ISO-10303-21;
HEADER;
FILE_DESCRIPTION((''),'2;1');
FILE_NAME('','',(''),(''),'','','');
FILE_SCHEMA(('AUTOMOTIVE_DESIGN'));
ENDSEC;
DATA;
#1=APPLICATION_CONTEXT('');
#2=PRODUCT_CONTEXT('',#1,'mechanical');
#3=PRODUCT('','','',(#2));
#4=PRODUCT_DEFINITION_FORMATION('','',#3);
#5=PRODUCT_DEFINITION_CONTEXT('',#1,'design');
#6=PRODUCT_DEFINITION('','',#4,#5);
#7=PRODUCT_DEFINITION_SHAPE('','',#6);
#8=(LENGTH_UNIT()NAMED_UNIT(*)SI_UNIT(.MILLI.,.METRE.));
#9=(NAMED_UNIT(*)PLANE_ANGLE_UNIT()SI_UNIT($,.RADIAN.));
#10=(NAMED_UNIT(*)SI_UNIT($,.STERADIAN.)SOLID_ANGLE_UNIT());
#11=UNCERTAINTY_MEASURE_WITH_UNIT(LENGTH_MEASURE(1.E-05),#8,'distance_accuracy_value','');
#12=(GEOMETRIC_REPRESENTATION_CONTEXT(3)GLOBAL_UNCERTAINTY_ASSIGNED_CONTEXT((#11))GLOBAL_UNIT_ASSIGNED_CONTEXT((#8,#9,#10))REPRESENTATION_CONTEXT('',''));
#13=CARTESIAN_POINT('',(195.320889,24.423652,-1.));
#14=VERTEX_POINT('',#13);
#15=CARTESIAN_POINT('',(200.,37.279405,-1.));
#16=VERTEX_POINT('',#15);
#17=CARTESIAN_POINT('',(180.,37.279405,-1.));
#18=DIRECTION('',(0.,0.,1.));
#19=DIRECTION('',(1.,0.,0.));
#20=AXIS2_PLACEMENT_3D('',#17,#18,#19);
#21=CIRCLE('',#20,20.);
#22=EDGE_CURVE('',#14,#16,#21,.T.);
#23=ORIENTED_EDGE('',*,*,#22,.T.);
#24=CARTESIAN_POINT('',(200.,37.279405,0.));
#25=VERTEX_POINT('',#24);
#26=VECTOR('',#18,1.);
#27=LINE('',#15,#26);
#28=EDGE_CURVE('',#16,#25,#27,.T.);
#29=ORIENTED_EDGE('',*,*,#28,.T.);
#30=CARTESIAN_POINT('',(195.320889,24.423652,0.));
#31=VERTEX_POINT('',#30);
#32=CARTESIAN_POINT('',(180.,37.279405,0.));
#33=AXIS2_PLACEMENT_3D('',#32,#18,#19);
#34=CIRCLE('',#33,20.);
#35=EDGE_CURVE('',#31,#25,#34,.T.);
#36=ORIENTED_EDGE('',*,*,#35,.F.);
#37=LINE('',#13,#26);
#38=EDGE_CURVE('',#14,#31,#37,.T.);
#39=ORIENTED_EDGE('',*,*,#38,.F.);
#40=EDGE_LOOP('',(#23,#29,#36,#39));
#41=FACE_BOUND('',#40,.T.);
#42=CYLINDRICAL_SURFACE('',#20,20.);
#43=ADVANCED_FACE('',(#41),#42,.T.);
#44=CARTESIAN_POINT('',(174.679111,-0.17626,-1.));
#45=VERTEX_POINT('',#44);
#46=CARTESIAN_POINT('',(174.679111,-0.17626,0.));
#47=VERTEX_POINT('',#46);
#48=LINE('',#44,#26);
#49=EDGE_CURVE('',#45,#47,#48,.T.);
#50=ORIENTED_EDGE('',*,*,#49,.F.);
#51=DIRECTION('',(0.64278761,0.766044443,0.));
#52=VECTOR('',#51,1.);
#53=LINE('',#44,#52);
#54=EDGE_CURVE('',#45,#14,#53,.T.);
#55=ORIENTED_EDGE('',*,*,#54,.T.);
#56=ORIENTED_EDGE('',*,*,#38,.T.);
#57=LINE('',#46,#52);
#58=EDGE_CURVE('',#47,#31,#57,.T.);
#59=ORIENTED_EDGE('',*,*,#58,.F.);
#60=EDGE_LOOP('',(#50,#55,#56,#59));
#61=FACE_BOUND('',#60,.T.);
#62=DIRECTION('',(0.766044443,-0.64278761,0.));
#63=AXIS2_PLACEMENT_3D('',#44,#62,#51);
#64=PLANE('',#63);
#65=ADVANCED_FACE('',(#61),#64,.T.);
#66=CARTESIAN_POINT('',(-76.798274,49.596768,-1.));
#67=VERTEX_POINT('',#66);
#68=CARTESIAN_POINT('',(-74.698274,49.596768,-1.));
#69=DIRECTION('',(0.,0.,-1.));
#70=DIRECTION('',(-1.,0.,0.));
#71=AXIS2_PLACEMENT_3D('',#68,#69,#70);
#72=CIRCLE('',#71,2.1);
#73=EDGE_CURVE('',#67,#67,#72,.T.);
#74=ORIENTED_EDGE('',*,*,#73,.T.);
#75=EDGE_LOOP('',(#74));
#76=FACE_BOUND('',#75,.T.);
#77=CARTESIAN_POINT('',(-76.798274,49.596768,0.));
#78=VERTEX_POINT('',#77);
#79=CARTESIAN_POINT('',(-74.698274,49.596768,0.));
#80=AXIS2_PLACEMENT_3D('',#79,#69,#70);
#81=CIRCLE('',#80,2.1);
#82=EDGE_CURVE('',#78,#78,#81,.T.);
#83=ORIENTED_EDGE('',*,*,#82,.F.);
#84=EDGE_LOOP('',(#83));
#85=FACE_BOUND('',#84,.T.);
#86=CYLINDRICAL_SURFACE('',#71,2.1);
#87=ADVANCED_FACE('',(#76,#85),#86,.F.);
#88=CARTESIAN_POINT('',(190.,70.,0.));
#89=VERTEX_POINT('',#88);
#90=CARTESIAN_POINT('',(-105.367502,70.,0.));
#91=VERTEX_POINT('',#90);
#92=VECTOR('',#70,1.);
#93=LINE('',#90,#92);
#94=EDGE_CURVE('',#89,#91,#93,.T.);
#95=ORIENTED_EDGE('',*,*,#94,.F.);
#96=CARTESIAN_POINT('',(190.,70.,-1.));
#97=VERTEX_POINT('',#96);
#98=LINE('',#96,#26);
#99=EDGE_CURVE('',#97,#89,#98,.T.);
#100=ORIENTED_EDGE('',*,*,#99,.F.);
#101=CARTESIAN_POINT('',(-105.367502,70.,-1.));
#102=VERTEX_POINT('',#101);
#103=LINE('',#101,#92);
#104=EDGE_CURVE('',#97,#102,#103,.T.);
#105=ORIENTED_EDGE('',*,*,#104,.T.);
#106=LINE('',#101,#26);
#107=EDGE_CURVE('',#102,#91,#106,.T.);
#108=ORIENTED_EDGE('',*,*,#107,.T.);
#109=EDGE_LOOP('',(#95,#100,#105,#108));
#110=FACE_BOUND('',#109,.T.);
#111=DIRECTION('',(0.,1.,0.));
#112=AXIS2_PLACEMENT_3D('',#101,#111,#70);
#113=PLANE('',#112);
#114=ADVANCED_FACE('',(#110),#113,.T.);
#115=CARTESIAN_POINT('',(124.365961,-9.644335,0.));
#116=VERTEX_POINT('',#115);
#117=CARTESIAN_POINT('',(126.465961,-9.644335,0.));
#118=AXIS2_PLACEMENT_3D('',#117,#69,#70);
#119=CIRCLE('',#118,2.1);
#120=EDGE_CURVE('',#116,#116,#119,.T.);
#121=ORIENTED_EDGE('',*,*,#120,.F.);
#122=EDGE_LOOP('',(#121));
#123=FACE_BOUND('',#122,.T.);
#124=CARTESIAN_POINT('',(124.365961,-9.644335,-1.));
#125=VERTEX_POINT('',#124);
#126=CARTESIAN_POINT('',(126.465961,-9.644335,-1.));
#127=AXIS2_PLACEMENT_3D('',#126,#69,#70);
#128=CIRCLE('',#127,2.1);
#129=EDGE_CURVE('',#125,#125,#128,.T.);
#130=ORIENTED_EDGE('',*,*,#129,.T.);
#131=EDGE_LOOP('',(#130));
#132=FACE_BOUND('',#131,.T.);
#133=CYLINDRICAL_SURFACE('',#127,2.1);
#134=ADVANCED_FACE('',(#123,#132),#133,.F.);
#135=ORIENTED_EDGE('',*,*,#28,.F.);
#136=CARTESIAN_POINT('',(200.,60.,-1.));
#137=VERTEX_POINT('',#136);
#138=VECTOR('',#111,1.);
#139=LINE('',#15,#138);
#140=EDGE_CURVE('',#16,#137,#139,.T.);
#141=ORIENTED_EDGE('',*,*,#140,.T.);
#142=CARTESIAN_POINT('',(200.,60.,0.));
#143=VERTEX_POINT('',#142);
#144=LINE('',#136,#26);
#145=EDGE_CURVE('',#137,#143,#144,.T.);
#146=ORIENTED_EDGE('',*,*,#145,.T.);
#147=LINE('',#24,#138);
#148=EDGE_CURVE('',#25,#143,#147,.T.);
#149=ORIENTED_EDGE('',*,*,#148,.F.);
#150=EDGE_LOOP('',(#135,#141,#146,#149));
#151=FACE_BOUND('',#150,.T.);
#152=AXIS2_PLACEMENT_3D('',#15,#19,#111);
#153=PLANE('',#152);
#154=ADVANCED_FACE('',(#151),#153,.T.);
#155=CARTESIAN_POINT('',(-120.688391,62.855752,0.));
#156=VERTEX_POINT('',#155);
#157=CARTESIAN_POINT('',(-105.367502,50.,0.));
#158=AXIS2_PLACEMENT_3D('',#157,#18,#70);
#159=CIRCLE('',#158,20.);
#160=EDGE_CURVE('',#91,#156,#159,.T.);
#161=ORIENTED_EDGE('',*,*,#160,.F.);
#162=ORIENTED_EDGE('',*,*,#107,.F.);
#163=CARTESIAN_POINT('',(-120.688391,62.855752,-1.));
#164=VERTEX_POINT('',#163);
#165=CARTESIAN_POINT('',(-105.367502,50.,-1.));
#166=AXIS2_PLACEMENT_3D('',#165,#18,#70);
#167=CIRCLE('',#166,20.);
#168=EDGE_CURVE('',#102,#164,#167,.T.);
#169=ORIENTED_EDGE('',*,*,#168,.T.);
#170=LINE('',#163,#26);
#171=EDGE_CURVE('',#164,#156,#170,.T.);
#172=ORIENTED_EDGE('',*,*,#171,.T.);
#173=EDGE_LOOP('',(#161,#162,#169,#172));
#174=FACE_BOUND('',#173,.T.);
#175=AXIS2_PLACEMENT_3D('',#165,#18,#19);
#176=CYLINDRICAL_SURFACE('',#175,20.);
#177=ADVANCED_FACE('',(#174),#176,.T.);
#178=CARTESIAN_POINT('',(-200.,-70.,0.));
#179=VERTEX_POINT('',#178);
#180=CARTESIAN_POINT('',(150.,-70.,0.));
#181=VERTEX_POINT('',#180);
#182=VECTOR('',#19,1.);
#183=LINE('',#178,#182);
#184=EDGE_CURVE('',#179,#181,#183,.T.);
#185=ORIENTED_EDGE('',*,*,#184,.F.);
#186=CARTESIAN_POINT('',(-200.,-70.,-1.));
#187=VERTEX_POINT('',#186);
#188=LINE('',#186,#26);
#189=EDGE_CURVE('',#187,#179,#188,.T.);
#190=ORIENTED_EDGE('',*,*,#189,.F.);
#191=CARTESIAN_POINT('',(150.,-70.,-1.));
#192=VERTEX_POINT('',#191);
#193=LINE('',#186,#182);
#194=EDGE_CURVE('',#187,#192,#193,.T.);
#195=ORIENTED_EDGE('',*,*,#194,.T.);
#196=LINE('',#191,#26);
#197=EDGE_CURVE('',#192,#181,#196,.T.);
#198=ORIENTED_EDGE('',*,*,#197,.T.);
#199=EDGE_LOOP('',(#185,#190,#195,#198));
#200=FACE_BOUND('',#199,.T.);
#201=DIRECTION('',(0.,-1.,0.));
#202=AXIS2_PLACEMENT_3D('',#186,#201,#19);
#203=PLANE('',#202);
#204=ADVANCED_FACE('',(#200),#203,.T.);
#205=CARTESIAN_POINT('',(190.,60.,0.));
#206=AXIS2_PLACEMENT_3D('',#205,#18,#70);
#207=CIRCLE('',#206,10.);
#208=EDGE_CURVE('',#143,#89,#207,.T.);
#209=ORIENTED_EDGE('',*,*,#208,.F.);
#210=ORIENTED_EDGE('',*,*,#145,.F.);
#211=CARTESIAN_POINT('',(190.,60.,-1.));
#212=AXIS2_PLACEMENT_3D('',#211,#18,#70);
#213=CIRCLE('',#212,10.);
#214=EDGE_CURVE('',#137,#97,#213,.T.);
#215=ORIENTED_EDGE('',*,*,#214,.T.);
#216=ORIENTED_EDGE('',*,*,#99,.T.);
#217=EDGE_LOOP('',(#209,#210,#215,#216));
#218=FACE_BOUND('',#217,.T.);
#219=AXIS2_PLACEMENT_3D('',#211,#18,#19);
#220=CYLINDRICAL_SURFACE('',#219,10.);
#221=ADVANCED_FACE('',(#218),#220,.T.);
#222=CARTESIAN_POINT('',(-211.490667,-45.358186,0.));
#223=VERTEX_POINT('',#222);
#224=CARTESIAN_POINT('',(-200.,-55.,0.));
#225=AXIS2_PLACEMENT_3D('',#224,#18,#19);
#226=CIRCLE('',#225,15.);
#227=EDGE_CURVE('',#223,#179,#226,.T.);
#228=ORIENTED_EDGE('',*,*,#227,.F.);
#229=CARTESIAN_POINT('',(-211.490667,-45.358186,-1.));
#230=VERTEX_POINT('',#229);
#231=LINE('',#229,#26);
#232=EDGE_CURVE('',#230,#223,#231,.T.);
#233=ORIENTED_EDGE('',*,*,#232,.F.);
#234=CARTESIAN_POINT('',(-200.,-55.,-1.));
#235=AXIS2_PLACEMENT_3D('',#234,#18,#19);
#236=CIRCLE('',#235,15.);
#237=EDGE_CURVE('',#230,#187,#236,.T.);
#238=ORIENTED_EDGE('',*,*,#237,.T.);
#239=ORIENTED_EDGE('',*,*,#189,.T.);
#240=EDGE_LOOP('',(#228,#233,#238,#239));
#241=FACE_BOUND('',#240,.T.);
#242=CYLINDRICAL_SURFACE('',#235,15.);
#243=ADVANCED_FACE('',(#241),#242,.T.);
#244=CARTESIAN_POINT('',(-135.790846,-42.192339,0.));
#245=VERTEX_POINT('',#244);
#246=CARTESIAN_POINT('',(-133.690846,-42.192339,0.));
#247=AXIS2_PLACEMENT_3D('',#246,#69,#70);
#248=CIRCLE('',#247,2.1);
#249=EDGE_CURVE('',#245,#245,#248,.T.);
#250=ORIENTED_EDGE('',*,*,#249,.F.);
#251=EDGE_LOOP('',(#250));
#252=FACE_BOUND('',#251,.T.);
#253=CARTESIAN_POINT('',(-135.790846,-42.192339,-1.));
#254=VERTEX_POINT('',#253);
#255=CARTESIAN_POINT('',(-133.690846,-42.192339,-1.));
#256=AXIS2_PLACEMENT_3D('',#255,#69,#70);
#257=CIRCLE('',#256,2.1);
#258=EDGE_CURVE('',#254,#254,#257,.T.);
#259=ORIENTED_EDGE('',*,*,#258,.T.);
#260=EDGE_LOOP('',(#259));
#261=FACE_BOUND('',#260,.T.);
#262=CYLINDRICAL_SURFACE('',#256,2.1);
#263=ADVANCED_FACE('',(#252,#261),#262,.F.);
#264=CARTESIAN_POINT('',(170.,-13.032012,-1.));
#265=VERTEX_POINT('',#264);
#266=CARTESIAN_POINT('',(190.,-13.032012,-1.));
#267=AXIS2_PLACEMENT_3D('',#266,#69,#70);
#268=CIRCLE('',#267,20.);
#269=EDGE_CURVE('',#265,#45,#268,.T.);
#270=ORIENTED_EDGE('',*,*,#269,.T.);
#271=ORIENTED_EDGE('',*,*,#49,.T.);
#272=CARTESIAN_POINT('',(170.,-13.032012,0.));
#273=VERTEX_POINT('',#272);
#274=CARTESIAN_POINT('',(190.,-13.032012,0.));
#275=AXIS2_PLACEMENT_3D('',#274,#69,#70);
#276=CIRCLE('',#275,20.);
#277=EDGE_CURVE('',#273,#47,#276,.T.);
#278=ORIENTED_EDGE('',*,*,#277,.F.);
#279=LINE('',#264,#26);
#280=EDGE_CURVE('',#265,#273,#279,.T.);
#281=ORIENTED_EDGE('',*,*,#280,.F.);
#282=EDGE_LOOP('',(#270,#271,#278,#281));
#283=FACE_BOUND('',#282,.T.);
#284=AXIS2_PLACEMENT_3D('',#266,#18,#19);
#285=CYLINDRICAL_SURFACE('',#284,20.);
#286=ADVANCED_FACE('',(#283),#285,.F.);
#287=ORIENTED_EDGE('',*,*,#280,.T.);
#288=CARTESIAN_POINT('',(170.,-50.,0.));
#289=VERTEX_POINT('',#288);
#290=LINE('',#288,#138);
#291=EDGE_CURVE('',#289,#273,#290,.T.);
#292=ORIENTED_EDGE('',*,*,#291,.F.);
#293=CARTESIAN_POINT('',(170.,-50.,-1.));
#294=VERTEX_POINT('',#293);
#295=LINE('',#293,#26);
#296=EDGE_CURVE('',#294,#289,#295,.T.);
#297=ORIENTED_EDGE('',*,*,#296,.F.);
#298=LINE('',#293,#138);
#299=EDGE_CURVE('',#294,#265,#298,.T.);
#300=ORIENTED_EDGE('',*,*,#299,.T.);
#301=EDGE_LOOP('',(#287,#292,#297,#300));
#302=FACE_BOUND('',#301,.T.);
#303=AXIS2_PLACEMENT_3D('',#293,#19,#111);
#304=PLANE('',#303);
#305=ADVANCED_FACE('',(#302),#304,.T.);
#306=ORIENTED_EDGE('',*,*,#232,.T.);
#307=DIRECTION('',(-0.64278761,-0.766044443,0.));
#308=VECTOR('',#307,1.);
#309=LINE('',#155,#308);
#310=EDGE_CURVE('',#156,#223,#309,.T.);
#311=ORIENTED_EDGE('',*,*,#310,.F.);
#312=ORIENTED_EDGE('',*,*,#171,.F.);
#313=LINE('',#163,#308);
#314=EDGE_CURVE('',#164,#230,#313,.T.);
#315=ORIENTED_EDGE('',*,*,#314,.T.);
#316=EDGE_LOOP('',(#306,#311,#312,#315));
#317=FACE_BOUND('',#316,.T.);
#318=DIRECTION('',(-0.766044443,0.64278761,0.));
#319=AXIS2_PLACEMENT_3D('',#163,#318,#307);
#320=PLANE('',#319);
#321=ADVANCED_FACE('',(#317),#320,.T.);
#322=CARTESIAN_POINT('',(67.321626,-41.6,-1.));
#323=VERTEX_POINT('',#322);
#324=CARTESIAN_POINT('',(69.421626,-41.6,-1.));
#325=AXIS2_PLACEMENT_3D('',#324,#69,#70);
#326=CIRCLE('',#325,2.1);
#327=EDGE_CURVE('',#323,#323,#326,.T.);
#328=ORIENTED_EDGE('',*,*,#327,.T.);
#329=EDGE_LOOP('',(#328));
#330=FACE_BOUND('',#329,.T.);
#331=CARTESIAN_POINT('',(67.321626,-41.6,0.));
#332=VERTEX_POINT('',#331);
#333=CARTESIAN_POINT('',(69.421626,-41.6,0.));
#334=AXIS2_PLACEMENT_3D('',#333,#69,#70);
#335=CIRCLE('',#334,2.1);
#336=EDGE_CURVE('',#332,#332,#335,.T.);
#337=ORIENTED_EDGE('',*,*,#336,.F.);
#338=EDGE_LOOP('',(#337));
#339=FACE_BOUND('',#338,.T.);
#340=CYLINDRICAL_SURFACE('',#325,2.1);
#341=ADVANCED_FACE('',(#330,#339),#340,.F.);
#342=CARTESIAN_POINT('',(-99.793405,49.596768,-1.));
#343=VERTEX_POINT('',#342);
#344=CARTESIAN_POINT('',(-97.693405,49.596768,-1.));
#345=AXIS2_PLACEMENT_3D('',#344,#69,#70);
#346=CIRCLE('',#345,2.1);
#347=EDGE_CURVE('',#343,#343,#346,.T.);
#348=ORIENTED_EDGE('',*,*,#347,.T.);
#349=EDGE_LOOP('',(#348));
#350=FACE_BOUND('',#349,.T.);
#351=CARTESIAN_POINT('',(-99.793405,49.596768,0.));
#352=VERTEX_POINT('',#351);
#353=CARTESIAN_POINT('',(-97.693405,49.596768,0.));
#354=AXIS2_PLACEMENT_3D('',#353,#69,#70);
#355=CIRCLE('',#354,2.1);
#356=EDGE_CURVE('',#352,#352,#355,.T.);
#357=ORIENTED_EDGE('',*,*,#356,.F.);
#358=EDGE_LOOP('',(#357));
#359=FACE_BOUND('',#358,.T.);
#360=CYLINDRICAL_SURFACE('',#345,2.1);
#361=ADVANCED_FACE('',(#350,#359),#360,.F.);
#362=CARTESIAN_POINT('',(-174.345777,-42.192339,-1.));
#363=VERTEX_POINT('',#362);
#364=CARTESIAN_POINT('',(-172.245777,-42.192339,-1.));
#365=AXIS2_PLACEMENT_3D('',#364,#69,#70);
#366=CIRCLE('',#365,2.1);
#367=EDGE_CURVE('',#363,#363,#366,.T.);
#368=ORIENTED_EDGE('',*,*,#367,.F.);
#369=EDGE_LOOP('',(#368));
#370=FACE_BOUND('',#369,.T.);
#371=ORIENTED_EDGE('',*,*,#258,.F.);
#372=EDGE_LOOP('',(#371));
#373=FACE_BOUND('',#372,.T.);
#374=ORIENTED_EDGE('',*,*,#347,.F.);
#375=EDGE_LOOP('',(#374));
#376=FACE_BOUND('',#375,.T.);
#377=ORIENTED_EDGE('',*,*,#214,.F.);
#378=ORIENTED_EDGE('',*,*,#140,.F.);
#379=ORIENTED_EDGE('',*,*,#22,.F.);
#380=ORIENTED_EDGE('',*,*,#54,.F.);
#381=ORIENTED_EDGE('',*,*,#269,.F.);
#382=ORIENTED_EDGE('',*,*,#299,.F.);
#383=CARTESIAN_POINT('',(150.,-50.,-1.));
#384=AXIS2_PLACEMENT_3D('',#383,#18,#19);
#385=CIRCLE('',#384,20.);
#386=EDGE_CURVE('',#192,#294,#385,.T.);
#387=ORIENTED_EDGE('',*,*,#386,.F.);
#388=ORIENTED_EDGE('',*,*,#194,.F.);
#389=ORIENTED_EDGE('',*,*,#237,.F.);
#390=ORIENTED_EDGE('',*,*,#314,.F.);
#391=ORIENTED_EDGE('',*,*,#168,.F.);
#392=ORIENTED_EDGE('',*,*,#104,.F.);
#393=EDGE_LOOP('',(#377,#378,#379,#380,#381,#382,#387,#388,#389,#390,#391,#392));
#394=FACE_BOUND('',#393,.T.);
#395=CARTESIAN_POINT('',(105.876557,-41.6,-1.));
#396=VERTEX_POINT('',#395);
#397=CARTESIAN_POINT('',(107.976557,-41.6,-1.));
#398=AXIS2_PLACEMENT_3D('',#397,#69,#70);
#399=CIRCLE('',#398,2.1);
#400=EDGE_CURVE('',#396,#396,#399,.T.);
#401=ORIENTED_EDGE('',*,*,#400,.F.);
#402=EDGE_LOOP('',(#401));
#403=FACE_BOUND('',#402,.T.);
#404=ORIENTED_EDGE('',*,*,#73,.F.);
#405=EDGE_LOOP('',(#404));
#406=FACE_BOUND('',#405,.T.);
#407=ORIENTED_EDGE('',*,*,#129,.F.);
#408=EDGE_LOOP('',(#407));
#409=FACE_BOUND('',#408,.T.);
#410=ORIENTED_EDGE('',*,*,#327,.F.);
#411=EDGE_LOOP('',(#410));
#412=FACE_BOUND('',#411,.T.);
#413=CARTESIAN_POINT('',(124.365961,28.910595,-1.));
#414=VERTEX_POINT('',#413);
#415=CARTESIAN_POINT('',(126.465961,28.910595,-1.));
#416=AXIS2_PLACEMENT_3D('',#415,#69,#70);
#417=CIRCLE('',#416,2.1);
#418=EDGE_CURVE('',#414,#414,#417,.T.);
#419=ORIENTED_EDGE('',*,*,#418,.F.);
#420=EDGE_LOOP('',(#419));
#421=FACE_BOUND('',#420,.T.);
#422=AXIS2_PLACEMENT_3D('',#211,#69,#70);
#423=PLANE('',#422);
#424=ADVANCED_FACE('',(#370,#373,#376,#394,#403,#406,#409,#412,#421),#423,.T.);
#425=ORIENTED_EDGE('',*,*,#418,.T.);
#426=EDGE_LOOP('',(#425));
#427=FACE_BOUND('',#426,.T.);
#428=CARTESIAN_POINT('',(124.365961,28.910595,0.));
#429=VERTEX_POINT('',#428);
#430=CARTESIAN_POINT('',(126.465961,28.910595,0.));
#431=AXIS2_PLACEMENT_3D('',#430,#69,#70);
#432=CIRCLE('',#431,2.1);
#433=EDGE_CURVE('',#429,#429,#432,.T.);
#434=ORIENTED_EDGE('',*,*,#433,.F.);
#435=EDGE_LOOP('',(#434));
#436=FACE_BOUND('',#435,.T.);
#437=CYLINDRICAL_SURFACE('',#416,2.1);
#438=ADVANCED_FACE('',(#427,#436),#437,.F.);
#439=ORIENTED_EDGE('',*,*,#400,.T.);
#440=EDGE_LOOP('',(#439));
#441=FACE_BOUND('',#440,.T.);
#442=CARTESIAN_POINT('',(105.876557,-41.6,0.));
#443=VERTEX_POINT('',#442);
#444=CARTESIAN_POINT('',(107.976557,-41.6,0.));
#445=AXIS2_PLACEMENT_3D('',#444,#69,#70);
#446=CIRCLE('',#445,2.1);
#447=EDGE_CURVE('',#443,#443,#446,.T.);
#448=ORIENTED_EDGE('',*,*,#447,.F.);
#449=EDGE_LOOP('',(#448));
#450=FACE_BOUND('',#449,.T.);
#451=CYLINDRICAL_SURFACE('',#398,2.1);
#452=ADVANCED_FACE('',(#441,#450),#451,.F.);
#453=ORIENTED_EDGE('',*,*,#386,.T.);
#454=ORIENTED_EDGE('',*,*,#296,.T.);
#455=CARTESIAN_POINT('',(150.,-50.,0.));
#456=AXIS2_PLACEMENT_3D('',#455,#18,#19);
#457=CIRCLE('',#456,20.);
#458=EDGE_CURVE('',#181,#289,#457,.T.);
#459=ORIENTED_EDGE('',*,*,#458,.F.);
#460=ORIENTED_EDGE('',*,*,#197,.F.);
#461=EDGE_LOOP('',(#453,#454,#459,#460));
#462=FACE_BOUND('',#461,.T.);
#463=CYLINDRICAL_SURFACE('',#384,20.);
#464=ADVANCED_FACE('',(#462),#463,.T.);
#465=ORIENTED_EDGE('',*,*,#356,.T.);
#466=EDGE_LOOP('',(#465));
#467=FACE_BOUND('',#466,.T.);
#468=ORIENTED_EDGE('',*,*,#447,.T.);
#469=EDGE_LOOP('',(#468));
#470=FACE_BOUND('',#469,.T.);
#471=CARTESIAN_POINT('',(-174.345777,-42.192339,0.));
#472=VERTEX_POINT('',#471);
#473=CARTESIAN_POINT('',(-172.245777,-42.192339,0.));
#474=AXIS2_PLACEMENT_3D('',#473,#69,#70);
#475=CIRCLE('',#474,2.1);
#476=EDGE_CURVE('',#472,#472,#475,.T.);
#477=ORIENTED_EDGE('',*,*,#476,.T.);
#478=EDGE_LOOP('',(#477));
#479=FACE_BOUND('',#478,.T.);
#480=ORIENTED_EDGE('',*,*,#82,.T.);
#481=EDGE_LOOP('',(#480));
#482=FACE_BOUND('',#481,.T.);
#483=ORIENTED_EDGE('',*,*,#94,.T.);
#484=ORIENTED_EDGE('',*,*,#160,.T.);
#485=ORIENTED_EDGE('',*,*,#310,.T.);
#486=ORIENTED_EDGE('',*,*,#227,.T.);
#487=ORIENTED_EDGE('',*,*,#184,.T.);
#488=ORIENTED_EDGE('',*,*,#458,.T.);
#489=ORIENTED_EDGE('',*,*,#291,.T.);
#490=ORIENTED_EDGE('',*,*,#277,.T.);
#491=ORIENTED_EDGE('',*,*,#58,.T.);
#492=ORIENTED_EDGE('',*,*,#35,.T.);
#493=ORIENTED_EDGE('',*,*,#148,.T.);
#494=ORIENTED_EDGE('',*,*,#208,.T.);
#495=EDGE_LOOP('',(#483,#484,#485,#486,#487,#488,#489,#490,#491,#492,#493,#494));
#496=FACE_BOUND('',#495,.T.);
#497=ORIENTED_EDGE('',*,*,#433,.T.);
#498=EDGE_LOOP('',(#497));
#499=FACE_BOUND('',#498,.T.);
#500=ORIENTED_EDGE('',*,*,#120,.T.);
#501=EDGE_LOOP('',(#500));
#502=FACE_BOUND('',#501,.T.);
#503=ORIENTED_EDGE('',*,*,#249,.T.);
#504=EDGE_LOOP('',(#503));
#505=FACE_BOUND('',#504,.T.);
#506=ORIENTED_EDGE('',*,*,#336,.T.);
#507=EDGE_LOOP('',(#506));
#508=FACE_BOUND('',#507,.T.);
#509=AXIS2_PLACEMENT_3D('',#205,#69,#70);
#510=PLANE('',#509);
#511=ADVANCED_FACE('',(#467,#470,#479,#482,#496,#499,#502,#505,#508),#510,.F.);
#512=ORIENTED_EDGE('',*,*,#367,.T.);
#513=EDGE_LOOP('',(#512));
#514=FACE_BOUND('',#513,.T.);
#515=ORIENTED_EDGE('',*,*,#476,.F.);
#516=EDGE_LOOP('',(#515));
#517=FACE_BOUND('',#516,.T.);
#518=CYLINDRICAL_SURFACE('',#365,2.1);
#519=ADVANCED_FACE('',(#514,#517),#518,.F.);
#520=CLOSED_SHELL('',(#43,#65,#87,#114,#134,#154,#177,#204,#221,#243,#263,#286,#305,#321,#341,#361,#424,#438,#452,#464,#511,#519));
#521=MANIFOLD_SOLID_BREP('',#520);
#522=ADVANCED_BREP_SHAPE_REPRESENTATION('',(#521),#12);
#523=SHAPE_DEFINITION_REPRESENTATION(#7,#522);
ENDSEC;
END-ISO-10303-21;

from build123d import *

# Parameters (mm, degrees)
BASE_FLANGE1_DEPTH                 = 1
F_4_2_START                        = -1
F_4_2_4_2_DIAMETER_HOLE1_OUTLINE_R = 2.1
F_4_2_4_2_DIAMETER_HOLE1_DEPTH     = 1


# Read off the part's stored shape, not the designer's step: Ø4.2 (4.2) Diameter Hole1
# Sheet-metal steps are written as plain solids
with BuildPart() as part:
    # Sketch1 → Base-Flange1 (new body)
    with BuildSketch(Plane.XY):
        with BuildLine():
            Line((-120.688391142, 62.855752194), (-211.490666647, -45.358185855))
            ThreePointArc((-211.490666647, -45.358185855), (-213.594616806, -61.339273926), (-200, -70))
            Line((-200, -70), (150, -70))
            ThreePointArc((150, -70), (164.142135624, -64.142135624), (170, -50))
            Line((170, -50), (170, -13.032012463))
            ThreePointArc((170, -13.032012463), (171.206147584, -6.191609597), (174.679111138, -0.176260269))
            Line((174.679111138, -0.176260269), (195.320888862, 24.423652492))
            ThreePointArc((195.320888862, 24.423652492), (198.793852416, 30.439001819), (200, 37.279404685))
            Line((200, 37.279404685), (200, 60))
            ThreePointArc((200, 60), (197.071067812, 67.071067812), (190, 70))
            Line((190, 70), (-105.36750228, 70))
            ThreePointArc((-105.36750228, 70), (-113.819867515, 68.126155741), (-120.688391142, 62.855752194))
        make_face()
    extrude(amount=-BASE_FLANGE1_DEPTH)

    # Ø4.2 (4.2) Diameter Hole1 outline → Ø4.2 (4.2) Diameter Hole1 (cut)
    with BuildSketch(Plane.XY.offset(F_4_2_START)):
        with Locations((107.976556815, -41.6)):
            Circle(F_4_2_4_2_DIAMETER_HOLE1_OUTLINE_R)
        with Locations((69.42162602, -41.6)):
            Circle(F_4_2_4_2_DIAMETER_HOLE1_OUTLINE_R)
        with Locations((-133.690845807, -42.192339034)):
            Circle(F_4_2_4_2_DIAMETER_HOLE1_OUTLINE_R)
        with Locations((-172.245776602, -42.192339034)):
            Circle(F_4_2_4_2_DIAMETER_HOLE1_OUTLINE_R)
        with Locations((-74.698274088, 49.596767959)):
            Circle(F_4_2_4_2_DIAMETER_HOLE1_OUTLINE_R)
        with Locations((126.46596136, -9.64433534)):
            Circle(F_4_2_4_2_DIAMETER_HOLE1_OUTLINE_R)
        with Locations((-97.693405311, 49.596767959)):
            Circle(F_4_2_4_2_DIAMETER_HOLE1_OUTLINE_R)
        with Locations((126.46596136, 28.910595455)):
            Circle(F_4_2_4_2_DIAMETER_HOLE1_OUTLINE_R)
    extrude(amount=F_4_2_4_2_DIAMETER_HOLE1_DEPTH, mode=Mode.SUBTRACT)


solid = part.part
